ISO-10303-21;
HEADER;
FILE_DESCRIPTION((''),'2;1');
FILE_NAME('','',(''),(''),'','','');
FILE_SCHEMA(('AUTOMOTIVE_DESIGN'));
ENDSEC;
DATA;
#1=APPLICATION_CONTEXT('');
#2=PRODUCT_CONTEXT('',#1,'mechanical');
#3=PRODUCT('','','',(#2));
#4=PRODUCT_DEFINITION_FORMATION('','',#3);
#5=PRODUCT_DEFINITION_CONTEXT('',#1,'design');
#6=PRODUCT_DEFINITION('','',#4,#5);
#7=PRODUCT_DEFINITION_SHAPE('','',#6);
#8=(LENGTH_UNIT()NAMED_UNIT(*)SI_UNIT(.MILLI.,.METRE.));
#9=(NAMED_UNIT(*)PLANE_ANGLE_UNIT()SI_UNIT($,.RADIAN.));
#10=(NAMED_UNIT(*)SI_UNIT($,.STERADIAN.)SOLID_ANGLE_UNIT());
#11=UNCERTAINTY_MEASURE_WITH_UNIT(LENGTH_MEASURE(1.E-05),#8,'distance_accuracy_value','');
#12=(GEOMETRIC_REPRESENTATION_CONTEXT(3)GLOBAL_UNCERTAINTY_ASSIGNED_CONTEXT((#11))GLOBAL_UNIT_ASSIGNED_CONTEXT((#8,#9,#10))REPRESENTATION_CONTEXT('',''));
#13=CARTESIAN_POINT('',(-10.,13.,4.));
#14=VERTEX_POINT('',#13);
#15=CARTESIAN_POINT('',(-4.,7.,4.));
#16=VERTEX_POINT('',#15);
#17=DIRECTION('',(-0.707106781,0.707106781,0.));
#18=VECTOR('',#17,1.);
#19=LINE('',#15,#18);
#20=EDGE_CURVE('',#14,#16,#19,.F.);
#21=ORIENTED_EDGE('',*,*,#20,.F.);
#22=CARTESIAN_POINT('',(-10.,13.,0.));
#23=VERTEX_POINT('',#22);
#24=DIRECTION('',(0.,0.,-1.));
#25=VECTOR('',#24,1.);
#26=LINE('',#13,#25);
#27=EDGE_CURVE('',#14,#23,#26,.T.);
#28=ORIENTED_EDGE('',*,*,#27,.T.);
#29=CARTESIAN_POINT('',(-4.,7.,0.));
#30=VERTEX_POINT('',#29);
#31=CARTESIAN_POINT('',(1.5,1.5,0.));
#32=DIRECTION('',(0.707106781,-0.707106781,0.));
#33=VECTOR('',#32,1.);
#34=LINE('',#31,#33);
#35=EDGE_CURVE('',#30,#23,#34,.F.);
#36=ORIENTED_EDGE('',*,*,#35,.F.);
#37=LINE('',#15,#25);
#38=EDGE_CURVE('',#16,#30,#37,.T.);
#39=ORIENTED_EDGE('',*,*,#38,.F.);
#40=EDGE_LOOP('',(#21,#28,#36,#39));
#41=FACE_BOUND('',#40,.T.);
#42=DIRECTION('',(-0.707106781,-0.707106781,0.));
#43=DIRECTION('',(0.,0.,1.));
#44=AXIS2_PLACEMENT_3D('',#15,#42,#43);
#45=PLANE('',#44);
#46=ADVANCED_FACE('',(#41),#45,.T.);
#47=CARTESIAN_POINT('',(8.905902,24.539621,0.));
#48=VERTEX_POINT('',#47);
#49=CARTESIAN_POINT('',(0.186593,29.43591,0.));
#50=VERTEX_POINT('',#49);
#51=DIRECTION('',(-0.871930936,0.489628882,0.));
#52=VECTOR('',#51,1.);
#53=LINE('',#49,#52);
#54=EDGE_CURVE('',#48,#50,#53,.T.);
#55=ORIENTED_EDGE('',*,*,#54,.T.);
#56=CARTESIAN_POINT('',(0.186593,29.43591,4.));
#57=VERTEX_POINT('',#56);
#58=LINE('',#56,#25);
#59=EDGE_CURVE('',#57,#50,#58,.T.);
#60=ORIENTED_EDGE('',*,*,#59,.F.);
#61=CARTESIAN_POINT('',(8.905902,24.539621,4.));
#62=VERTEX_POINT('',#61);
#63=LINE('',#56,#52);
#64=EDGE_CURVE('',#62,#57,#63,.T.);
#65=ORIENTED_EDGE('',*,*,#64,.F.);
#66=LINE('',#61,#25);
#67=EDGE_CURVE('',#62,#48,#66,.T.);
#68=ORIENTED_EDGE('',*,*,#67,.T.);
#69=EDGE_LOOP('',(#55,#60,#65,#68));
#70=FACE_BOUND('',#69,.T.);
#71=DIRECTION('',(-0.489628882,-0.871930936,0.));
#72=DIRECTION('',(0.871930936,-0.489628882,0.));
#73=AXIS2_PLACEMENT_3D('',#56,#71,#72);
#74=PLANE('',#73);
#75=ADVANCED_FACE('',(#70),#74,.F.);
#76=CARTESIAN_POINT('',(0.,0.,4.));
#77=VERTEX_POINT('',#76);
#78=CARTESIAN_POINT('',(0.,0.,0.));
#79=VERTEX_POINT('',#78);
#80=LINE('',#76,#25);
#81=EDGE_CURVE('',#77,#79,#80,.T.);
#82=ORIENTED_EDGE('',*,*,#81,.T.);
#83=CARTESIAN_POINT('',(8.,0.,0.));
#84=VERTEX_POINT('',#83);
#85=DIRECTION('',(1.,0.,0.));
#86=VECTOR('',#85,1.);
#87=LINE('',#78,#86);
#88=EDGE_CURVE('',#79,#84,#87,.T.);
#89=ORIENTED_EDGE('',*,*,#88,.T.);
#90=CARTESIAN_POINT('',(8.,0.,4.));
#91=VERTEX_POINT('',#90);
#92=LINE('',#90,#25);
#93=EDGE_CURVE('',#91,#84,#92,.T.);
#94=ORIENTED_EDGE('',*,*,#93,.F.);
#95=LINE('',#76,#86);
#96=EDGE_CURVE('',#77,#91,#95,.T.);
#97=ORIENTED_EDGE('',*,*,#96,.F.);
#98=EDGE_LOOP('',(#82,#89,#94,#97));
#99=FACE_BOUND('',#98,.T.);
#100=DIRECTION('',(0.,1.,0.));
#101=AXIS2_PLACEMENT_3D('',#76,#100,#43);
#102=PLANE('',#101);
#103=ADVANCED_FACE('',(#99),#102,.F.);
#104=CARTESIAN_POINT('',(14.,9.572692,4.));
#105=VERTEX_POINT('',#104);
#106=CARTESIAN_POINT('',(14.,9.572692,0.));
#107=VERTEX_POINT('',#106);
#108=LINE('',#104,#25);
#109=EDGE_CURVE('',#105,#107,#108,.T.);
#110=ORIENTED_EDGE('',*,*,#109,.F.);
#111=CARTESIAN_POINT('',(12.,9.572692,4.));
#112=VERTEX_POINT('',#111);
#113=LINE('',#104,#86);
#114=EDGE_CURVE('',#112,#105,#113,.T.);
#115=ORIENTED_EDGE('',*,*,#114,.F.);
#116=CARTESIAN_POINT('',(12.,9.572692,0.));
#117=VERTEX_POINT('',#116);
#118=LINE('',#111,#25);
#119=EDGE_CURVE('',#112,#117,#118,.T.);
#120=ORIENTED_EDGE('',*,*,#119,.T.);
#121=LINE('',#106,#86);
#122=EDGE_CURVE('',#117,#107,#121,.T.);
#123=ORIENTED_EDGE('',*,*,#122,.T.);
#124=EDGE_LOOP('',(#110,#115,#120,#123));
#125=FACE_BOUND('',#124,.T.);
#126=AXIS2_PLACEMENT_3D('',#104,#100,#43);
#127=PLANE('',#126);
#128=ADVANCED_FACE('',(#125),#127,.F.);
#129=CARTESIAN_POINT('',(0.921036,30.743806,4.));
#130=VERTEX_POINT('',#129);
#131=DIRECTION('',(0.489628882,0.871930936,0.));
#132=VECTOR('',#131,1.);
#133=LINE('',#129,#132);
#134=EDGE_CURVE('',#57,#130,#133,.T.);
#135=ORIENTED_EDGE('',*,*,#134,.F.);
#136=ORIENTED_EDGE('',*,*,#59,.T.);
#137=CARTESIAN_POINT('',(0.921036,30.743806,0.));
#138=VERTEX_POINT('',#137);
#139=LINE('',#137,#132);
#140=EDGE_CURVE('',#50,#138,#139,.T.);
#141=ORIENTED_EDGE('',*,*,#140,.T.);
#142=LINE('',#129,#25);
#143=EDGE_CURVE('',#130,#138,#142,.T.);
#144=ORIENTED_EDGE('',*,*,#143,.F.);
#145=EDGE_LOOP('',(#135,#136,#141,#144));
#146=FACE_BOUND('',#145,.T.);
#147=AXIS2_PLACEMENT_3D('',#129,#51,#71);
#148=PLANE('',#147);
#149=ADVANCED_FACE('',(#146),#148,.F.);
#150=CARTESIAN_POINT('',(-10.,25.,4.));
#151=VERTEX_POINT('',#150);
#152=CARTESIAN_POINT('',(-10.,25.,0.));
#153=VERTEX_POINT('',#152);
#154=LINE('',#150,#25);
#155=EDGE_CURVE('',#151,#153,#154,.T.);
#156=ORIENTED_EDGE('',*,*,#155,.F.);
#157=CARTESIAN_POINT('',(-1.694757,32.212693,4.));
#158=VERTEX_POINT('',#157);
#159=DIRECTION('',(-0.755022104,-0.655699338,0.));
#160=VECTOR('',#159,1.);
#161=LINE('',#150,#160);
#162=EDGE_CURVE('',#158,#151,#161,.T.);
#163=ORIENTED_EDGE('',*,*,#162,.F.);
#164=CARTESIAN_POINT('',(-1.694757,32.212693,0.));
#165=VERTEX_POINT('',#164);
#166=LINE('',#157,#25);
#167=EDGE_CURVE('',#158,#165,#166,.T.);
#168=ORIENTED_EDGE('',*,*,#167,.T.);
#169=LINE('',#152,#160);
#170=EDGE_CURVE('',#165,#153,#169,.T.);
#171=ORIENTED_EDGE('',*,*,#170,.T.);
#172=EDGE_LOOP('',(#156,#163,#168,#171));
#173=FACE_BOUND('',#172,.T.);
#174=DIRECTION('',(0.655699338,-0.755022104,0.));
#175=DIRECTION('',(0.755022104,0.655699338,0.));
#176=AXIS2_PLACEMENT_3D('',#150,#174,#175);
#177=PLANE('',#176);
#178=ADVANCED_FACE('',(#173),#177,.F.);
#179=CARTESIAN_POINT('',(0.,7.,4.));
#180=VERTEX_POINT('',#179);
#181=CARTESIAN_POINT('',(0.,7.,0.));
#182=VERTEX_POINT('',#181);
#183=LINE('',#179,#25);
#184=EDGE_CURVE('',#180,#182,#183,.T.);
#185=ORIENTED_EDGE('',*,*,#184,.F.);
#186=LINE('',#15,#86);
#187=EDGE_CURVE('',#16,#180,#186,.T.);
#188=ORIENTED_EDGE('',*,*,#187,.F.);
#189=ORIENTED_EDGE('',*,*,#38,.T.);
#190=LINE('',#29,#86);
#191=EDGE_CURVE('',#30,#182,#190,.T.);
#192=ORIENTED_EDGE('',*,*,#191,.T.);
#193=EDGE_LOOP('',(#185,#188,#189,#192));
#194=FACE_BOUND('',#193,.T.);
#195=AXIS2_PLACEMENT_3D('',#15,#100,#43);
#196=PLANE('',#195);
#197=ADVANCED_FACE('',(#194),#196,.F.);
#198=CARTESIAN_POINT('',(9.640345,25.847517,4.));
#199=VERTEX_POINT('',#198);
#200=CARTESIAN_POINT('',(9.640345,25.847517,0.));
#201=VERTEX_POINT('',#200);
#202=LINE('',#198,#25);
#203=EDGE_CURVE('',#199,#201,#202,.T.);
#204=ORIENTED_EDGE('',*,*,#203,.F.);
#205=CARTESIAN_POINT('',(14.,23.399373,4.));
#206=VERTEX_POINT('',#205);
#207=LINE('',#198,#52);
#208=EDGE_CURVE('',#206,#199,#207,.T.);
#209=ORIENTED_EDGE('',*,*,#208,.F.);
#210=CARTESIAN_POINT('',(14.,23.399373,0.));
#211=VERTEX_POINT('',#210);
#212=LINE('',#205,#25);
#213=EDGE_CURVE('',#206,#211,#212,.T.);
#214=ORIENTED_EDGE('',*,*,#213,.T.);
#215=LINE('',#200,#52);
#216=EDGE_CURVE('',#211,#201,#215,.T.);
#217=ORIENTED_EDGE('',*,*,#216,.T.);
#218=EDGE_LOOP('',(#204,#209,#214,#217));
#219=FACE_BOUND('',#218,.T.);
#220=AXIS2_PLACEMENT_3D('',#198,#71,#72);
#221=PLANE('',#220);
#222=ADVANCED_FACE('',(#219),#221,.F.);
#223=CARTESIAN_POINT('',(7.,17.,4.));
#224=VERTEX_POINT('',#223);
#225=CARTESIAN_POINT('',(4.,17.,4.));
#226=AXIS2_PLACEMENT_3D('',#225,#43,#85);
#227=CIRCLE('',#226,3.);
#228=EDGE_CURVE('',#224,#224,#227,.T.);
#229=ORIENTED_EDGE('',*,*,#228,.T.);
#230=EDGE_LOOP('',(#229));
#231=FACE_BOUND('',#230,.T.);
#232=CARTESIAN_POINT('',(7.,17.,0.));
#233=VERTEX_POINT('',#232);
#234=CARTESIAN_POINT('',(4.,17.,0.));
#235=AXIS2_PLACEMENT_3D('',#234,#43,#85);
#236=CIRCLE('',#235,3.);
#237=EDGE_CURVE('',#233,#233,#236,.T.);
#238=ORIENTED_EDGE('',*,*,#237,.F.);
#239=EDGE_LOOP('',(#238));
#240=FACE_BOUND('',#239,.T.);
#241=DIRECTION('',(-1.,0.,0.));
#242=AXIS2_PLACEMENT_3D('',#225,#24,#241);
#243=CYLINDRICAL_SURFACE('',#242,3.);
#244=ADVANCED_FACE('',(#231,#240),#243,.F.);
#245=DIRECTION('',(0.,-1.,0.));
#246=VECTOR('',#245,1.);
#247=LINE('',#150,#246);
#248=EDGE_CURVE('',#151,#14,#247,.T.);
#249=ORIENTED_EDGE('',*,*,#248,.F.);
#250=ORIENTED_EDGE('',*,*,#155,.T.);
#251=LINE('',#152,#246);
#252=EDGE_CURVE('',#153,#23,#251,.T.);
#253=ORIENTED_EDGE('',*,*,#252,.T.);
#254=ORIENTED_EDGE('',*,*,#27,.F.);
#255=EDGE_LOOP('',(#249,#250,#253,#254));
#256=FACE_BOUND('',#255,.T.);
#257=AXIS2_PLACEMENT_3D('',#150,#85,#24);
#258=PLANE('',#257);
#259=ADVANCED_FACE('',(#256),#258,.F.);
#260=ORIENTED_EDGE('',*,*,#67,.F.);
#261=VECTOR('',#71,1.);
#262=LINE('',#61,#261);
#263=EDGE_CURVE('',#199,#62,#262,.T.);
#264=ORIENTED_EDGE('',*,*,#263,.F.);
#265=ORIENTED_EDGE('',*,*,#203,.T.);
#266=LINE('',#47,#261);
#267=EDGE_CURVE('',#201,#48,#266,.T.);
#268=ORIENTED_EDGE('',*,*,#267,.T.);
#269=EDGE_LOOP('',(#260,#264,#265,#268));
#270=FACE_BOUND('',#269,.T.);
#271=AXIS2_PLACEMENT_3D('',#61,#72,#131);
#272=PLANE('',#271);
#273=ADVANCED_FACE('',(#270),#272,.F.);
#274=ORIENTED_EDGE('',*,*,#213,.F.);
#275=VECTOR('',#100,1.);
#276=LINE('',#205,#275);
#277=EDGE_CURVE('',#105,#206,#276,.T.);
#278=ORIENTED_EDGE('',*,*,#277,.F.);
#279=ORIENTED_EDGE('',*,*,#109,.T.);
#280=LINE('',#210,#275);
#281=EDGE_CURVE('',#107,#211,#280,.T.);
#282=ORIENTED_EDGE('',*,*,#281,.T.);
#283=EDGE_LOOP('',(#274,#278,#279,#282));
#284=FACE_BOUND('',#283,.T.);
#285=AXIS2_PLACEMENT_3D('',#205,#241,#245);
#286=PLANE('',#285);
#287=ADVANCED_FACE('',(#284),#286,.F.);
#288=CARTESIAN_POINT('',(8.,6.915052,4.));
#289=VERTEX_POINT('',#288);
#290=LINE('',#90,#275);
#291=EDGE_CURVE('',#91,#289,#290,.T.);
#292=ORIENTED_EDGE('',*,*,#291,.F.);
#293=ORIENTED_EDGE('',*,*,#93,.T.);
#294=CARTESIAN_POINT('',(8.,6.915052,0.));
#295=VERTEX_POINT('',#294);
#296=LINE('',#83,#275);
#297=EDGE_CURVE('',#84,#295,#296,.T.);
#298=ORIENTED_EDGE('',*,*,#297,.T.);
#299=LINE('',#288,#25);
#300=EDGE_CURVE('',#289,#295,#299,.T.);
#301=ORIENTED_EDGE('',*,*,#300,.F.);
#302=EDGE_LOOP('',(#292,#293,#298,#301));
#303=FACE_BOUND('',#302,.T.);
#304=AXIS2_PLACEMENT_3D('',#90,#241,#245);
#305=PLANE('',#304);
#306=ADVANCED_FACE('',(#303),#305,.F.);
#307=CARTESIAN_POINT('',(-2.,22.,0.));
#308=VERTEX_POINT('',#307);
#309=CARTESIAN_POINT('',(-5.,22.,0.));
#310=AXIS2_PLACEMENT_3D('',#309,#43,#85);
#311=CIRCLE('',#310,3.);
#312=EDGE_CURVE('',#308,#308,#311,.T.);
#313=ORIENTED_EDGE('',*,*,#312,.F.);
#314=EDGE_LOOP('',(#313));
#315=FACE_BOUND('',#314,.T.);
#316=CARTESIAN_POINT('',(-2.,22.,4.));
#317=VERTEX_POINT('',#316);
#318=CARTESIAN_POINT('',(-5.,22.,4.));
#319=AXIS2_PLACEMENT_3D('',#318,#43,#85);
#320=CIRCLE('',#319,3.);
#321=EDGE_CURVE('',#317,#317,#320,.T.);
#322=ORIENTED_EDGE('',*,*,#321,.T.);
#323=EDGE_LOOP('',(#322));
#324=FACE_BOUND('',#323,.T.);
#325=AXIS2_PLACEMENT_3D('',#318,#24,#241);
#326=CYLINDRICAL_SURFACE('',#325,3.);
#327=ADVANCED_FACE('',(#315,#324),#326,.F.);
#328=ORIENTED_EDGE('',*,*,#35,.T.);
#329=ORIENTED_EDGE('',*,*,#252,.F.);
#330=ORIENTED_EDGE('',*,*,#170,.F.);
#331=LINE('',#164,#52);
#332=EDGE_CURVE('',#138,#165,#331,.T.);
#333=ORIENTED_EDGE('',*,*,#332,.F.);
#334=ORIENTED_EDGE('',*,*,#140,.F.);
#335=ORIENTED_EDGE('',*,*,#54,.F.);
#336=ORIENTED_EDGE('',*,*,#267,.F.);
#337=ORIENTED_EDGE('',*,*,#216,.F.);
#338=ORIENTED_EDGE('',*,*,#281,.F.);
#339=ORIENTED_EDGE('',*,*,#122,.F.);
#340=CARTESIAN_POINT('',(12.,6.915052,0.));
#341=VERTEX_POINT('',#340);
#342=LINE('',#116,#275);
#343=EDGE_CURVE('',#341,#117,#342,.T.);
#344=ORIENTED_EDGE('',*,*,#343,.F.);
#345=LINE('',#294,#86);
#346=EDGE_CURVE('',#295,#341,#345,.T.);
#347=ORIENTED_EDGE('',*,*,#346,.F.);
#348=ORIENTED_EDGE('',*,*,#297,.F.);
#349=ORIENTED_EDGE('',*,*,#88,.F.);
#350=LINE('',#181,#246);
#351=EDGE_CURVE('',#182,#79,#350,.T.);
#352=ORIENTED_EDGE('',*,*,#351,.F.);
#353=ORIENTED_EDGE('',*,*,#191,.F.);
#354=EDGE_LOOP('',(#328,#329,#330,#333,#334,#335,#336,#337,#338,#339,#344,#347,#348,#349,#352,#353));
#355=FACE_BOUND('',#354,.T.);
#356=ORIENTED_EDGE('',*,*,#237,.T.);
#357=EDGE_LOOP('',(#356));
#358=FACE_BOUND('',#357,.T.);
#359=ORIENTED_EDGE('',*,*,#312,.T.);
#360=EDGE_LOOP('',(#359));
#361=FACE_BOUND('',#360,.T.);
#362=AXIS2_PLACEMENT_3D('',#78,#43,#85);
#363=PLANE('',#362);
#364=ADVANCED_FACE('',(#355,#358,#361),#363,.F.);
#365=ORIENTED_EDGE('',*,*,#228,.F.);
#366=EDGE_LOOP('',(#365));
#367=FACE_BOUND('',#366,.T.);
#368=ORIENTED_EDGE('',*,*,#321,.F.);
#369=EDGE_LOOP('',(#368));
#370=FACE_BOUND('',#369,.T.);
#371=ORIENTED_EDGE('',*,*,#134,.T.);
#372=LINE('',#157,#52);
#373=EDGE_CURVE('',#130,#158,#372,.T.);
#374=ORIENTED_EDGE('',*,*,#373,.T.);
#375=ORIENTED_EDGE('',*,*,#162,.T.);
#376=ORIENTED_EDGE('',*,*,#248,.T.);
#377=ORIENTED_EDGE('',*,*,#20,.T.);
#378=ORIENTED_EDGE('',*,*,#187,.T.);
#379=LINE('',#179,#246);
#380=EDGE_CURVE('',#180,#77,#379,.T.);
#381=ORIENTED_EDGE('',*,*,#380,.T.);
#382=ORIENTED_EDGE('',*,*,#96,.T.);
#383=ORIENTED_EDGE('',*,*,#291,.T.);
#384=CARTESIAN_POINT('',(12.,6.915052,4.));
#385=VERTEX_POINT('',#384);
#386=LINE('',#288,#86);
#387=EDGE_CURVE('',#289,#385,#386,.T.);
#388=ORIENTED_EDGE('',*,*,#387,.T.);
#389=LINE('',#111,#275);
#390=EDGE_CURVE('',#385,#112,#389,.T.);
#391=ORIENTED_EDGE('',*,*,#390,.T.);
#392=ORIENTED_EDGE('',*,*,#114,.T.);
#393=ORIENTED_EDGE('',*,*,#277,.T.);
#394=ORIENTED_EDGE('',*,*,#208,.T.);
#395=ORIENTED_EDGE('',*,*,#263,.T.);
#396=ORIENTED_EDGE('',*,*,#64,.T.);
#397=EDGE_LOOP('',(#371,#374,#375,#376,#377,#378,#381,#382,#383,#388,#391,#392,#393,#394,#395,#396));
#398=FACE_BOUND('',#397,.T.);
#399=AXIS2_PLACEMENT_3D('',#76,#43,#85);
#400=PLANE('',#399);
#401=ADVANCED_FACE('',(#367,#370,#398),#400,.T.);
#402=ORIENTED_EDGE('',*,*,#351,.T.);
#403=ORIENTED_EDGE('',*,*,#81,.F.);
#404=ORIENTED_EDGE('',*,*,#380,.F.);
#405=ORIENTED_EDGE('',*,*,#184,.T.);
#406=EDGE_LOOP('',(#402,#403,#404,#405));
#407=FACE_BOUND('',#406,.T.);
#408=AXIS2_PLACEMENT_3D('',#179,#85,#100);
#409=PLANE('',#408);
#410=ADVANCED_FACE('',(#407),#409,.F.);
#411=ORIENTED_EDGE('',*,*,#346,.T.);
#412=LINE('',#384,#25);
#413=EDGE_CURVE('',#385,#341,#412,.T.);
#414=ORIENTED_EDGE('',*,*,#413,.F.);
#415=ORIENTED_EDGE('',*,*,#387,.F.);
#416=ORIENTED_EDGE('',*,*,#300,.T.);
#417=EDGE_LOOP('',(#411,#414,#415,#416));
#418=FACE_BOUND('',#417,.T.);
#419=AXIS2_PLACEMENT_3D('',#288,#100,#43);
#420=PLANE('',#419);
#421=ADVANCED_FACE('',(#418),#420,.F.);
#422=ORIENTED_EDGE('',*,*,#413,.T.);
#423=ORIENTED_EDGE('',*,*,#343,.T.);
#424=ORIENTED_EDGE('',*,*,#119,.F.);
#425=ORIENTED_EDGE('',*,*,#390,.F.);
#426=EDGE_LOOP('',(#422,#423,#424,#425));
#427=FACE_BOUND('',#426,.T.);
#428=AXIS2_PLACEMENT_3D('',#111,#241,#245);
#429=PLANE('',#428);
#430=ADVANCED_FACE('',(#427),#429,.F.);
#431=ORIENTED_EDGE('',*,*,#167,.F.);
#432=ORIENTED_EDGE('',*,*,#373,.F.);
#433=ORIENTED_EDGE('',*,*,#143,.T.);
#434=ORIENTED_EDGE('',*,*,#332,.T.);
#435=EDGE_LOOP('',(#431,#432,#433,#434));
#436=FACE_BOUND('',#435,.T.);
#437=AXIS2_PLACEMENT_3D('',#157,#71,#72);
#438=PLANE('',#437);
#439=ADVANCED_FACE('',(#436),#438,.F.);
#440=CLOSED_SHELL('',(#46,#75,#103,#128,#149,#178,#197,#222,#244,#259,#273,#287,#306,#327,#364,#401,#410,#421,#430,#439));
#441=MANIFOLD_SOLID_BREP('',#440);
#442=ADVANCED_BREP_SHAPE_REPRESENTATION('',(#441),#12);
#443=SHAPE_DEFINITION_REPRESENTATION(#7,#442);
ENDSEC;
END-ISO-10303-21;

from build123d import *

# Parameters (mm, degrees)
SKETCH_1_R      = 3
EXTRUDE_1_DEPTH = 4
CHAMFER_1_SIZE  = 6


with BuildPart() as part:
    # 草图1 → 凸台-拉伸1 (new body)
    with BuildSketch(Plane.XY):
        Polygon((-10, 25), (-1.694756853, 32.21269272), (0.921035956, 30.743806073), (0.186592632, 29.435909669), (8.905901995, 24.539620846), (9.640345319, 25.84751725), (14, 23.399372839), (14, 9.572691833), (12, 9.572691833), (12, 6.915051809), (8, 6.915051809), (8, 0), (0, 0), (0, 7), (-4, 7), (-4, 13), (-10, 13), align=None)
        with Locations((-5, 22)):
            Circle(SKETCH_1_R, mode=Mode.SUBTRACT)
        with Locations((4, 17)):
            Circle(SKETCH_1_R, mode=Mode.SUBTRACT)
    extrude(amount=EXTRUDE_1_DEPTH)

    # 倒角1
    chamfer_1_edges = [part.edges().sort_by_distance(p)[0] for p in [
        (-4, 13, 2),
    ]]
    chamfer(chamfer_1_edges, length=CHAMFER_1_SIZE - 0.0001)  # a hair under: the kernel refuses the full size


solid = part.part
